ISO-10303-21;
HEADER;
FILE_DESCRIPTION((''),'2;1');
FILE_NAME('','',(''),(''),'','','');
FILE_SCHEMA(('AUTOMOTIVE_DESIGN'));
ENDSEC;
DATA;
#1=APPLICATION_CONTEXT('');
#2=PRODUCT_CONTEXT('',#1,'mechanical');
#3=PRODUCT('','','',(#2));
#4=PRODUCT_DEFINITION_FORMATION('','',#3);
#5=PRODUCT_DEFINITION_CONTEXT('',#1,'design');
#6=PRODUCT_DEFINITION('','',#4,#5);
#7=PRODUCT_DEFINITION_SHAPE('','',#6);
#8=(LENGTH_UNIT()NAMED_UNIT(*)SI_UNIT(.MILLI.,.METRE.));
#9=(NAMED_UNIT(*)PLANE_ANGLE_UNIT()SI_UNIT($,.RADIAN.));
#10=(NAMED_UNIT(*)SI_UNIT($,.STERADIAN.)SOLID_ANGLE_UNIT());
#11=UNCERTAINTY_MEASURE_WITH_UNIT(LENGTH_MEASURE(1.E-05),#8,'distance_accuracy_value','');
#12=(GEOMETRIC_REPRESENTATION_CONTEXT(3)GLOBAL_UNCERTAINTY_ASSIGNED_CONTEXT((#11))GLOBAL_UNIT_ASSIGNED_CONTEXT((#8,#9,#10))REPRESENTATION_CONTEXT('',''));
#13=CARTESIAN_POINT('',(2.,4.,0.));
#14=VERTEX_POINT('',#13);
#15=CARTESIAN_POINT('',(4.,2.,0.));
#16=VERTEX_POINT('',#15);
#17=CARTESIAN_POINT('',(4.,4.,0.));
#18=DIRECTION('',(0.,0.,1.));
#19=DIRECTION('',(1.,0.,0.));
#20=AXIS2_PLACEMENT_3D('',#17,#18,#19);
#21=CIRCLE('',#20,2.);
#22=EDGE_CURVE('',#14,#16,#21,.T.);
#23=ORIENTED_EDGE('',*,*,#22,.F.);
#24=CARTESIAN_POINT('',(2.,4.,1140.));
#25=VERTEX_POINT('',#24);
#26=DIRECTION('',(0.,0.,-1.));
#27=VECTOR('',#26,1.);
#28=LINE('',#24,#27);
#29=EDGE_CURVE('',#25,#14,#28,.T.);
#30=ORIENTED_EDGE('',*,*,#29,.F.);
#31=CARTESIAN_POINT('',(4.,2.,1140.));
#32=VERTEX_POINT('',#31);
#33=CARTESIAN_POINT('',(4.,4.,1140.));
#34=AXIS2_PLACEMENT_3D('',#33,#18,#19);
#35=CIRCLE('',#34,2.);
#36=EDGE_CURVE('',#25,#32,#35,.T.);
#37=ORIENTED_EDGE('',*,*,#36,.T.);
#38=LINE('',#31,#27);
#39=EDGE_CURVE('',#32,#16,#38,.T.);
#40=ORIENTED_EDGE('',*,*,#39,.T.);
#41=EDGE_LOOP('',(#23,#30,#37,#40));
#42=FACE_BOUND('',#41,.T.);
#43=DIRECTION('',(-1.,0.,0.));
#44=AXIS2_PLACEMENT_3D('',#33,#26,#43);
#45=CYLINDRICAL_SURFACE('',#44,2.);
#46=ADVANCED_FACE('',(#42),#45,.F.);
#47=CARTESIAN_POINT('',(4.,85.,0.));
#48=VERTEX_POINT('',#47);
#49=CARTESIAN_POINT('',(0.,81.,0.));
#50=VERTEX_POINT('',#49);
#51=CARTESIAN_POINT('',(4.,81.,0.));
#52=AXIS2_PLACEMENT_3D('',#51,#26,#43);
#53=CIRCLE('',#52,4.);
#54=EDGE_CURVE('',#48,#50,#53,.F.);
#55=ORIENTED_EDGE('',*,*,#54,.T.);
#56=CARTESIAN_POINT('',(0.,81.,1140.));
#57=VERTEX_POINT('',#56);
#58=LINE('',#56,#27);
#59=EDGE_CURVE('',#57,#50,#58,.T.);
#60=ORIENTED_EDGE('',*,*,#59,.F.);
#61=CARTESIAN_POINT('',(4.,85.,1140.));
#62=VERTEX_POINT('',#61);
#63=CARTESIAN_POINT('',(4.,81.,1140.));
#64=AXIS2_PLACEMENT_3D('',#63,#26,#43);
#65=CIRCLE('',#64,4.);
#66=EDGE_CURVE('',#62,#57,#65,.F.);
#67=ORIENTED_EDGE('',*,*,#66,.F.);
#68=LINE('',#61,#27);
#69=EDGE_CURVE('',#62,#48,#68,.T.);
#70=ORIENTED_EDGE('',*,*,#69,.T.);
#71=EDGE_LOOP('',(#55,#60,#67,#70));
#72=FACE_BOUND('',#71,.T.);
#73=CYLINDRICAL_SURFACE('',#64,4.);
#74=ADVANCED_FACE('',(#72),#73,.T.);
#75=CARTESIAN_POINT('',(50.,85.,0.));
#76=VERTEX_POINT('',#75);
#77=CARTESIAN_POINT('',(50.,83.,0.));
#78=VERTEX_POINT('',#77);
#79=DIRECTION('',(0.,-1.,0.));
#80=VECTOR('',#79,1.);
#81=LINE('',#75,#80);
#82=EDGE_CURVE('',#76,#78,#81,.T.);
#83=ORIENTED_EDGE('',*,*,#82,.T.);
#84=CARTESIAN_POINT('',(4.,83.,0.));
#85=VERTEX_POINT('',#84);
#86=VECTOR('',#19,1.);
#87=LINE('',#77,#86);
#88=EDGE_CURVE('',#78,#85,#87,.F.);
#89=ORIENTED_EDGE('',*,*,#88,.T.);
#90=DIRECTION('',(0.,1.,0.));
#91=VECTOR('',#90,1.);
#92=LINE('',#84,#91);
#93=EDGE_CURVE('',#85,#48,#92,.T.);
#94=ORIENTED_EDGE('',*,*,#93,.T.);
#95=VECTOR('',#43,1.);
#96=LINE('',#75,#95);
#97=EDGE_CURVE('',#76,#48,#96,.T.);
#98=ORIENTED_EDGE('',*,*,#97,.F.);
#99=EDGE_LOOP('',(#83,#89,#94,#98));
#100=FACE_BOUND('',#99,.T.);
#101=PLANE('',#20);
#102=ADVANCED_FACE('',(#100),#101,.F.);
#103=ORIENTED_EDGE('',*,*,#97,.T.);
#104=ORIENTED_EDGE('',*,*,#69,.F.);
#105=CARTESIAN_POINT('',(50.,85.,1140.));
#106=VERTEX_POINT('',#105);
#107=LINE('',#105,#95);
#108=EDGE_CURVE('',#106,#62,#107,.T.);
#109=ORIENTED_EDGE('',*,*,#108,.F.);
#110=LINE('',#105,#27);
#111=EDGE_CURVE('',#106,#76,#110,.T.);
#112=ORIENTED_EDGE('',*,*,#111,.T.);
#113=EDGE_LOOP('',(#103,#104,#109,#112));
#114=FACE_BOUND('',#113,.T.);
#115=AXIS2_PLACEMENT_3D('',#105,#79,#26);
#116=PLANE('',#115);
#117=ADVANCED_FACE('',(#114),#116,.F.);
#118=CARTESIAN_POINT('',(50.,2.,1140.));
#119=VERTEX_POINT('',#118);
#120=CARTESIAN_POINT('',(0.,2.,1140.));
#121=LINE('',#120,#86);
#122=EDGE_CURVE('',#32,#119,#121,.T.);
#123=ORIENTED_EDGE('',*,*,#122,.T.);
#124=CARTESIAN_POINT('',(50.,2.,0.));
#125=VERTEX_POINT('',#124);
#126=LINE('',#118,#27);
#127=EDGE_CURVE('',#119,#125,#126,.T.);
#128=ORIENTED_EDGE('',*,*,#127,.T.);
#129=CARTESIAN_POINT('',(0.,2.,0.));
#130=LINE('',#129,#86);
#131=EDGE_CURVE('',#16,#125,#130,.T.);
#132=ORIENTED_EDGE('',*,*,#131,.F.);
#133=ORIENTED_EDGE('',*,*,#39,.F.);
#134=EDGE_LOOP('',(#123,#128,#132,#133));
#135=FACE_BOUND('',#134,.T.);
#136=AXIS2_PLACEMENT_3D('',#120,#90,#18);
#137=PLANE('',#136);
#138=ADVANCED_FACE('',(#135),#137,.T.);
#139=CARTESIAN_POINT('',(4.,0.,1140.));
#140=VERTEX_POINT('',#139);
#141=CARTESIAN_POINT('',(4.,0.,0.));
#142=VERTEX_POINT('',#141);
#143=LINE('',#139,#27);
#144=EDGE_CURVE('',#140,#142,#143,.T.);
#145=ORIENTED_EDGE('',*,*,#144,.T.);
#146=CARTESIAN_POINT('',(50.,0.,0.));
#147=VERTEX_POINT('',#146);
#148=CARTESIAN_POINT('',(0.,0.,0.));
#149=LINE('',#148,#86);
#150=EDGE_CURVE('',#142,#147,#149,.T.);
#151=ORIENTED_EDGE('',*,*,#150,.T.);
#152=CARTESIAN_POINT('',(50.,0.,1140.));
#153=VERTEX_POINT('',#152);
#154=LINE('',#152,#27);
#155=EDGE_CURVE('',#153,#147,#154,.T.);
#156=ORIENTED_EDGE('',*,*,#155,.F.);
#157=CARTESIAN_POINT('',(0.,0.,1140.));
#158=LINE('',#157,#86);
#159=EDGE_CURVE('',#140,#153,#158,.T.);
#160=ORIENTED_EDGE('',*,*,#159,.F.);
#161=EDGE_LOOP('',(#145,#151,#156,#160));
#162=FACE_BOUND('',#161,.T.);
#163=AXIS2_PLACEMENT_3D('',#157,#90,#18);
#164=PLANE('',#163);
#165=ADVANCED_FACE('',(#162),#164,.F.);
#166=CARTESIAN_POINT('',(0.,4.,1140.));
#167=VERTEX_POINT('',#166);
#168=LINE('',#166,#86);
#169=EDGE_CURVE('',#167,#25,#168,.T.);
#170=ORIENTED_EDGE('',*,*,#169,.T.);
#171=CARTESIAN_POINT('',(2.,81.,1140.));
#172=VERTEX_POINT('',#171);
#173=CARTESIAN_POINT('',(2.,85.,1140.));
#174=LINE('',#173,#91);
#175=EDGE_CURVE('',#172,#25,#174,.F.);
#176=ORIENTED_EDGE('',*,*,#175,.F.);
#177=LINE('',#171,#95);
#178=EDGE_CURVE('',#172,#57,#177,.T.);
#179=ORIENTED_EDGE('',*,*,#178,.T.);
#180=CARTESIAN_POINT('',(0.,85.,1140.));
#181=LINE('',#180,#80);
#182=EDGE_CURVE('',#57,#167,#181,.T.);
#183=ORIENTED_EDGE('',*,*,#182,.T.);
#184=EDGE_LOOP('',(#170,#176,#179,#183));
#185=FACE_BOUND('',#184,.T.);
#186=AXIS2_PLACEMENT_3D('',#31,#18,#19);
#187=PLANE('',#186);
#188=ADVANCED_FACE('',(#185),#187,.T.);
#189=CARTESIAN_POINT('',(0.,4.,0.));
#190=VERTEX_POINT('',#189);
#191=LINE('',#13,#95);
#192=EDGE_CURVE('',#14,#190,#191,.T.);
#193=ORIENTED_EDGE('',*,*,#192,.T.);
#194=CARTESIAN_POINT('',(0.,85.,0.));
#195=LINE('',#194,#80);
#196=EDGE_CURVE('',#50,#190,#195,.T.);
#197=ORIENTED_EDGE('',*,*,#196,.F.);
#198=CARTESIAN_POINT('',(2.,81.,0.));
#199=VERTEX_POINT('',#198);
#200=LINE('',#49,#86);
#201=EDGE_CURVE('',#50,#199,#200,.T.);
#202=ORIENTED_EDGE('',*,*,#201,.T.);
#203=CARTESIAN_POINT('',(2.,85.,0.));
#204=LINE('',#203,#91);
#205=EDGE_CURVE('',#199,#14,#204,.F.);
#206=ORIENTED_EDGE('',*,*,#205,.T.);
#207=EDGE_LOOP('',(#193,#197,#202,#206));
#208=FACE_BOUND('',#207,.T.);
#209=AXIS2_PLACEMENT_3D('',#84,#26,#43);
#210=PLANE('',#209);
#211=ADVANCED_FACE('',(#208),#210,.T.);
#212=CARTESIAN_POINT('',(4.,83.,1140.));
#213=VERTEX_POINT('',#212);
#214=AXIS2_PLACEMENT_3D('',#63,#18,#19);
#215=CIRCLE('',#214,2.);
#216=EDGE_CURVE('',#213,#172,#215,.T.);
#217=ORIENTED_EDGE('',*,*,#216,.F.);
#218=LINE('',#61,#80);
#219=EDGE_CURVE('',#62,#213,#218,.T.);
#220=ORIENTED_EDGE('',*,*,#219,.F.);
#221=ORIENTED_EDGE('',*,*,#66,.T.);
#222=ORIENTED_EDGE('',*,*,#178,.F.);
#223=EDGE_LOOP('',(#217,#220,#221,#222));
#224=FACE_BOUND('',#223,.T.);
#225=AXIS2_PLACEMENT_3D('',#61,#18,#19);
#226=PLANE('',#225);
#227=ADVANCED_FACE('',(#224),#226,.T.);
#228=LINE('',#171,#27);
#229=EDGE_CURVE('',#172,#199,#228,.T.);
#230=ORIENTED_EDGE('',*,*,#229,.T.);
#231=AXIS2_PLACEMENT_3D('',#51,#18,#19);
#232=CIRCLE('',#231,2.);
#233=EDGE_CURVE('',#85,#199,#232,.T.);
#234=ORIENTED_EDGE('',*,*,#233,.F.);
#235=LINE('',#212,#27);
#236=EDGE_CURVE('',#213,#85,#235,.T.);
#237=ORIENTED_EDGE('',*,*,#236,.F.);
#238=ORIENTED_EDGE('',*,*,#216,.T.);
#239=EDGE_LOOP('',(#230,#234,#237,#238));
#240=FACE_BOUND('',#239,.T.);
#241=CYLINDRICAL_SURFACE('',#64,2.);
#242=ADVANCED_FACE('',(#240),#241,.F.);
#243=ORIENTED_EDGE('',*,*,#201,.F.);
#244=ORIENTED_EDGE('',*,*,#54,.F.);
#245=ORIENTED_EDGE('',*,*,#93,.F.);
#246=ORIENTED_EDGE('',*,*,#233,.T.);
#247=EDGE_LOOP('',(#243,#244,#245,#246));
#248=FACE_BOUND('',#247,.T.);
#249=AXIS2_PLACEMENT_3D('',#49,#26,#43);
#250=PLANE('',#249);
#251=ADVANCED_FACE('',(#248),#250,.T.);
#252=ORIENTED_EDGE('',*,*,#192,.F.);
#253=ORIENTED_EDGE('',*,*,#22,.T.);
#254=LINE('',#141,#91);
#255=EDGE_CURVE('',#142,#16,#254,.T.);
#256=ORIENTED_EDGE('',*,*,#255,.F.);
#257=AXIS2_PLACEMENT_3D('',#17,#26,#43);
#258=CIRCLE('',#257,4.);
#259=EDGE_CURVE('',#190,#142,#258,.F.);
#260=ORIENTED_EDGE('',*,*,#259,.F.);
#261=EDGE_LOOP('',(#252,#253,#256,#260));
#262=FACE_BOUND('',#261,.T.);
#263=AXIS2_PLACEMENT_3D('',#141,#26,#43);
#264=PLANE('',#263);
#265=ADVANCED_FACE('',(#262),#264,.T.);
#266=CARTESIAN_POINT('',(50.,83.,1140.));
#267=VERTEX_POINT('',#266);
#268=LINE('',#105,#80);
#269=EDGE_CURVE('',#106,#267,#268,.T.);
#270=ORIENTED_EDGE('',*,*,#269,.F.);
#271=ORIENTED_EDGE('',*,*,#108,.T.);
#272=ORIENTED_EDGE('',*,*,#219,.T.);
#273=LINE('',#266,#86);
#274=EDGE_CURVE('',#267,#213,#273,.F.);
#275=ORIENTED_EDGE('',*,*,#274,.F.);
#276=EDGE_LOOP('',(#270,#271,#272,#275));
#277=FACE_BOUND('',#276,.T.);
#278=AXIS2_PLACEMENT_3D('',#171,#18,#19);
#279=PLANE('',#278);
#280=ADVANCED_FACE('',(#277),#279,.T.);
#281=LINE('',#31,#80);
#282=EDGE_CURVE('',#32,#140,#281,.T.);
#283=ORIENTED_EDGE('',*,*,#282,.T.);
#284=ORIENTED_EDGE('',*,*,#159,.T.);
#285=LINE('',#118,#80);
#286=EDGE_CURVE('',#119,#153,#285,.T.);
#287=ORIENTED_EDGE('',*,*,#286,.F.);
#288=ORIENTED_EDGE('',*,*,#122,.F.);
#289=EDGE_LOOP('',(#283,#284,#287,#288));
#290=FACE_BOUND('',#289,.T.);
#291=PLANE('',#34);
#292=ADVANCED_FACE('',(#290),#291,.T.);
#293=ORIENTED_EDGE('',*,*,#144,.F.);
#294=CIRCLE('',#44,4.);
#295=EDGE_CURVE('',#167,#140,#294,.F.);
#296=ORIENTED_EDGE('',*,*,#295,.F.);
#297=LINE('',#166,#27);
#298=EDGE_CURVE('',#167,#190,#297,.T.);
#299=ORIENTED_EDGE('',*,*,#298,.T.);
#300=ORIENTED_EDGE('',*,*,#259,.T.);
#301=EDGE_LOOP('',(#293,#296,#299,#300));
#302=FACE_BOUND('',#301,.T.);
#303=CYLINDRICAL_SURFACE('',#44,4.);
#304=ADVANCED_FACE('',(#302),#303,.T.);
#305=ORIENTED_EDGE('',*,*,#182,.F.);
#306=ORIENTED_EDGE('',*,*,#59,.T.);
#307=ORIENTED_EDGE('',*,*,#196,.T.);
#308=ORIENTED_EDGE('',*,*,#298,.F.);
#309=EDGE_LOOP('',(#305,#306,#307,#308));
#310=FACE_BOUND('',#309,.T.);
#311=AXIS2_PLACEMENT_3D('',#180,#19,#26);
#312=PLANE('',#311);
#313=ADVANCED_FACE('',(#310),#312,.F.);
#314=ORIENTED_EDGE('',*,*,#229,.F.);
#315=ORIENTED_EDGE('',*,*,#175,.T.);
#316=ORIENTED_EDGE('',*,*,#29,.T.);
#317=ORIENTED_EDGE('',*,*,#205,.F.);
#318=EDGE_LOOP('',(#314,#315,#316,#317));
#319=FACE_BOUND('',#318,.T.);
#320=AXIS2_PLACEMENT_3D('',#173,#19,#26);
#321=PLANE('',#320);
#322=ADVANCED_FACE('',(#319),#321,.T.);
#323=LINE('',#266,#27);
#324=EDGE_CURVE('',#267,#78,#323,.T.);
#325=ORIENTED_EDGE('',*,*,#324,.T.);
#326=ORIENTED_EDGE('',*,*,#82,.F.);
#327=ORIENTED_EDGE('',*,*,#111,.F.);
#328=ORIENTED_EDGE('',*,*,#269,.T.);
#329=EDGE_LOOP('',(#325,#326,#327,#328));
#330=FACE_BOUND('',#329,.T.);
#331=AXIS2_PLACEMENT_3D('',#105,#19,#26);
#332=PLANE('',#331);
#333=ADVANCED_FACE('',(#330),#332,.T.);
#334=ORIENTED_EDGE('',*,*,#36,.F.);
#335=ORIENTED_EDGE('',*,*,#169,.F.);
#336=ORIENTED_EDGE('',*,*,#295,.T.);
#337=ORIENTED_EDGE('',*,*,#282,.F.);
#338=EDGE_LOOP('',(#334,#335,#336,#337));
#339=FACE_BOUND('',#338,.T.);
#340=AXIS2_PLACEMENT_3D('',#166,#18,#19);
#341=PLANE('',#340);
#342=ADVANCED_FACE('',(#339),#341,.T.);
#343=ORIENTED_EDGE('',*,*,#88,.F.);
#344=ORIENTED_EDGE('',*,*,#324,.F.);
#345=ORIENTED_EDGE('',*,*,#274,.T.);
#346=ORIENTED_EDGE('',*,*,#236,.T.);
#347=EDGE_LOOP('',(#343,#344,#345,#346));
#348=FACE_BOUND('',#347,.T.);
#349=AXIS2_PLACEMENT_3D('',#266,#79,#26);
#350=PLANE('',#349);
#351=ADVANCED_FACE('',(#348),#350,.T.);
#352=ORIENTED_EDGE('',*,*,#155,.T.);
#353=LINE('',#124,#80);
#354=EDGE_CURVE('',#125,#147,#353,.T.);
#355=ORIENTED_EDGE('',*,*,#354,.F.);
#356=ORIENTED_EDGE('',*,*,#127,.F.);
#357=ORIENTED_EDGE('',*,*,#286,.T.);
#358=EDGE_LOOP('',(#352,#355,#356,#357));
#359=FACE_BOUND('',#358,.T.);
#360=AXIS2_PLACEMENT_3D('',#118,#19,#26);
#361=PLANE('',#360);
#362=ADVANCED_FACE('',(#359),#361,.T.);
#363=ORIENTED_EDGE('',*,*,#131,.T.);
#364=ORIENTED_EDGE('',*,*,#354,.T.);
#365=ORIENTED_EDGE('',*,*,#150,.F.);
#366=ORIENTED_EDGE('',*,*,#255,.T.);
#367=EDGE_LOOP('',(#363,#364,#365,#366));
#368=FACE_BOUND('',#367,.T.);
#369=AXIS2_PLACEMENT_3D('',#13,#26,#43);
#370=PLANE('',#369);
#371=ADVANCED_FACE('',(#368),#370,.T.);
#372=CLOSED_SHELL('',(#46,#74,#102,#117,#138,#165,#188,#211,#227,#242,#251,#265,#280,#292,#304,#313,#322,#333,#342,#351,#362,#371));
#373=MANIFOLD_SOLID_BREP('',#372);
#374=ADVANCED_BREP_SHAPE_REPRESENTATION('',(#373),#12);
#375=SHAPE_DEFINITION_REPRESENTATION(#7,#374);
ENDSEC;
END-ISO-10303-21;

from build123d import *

# Parameters (mm, degrees)
BASE_FLANGE1_DEPTH = 1140


# Sheet-metal steps are written as plain solids
with BuildPart() as part:
    # Sketch1 → Base-Flange1 (new body)
    with BuildSketch(Plane.XY):
        with BuildLine():
            Line((50, 85), (4, 85))
            ThreePointArc((4, 85), (1.171572875, 83.828427125), (0, 81))
            Line((0, 81), (0, 4))
            ThreePointArc((0, 4), (1.171572875, 1.171572875), (4, 0))
            Line((4, 0), (50, 0))
            Line((50, 0), (50, 2))
            Line((50, 2), (4, 2))
            ThreePointArc((4, 2), (2.585786438, 2.585786438), (2, 4))
            Line((2, 4), (2, 81))
            ThreePointArc((2, 81), (2.585786438, 82.414213562), (4, 83))
            Line((4, 83), (50, 83))
            Line((50, 83), (50, 85))
        make_face()
    extrude(amount=BASE_FLANGE1_DEPTH)


solid = part.part
